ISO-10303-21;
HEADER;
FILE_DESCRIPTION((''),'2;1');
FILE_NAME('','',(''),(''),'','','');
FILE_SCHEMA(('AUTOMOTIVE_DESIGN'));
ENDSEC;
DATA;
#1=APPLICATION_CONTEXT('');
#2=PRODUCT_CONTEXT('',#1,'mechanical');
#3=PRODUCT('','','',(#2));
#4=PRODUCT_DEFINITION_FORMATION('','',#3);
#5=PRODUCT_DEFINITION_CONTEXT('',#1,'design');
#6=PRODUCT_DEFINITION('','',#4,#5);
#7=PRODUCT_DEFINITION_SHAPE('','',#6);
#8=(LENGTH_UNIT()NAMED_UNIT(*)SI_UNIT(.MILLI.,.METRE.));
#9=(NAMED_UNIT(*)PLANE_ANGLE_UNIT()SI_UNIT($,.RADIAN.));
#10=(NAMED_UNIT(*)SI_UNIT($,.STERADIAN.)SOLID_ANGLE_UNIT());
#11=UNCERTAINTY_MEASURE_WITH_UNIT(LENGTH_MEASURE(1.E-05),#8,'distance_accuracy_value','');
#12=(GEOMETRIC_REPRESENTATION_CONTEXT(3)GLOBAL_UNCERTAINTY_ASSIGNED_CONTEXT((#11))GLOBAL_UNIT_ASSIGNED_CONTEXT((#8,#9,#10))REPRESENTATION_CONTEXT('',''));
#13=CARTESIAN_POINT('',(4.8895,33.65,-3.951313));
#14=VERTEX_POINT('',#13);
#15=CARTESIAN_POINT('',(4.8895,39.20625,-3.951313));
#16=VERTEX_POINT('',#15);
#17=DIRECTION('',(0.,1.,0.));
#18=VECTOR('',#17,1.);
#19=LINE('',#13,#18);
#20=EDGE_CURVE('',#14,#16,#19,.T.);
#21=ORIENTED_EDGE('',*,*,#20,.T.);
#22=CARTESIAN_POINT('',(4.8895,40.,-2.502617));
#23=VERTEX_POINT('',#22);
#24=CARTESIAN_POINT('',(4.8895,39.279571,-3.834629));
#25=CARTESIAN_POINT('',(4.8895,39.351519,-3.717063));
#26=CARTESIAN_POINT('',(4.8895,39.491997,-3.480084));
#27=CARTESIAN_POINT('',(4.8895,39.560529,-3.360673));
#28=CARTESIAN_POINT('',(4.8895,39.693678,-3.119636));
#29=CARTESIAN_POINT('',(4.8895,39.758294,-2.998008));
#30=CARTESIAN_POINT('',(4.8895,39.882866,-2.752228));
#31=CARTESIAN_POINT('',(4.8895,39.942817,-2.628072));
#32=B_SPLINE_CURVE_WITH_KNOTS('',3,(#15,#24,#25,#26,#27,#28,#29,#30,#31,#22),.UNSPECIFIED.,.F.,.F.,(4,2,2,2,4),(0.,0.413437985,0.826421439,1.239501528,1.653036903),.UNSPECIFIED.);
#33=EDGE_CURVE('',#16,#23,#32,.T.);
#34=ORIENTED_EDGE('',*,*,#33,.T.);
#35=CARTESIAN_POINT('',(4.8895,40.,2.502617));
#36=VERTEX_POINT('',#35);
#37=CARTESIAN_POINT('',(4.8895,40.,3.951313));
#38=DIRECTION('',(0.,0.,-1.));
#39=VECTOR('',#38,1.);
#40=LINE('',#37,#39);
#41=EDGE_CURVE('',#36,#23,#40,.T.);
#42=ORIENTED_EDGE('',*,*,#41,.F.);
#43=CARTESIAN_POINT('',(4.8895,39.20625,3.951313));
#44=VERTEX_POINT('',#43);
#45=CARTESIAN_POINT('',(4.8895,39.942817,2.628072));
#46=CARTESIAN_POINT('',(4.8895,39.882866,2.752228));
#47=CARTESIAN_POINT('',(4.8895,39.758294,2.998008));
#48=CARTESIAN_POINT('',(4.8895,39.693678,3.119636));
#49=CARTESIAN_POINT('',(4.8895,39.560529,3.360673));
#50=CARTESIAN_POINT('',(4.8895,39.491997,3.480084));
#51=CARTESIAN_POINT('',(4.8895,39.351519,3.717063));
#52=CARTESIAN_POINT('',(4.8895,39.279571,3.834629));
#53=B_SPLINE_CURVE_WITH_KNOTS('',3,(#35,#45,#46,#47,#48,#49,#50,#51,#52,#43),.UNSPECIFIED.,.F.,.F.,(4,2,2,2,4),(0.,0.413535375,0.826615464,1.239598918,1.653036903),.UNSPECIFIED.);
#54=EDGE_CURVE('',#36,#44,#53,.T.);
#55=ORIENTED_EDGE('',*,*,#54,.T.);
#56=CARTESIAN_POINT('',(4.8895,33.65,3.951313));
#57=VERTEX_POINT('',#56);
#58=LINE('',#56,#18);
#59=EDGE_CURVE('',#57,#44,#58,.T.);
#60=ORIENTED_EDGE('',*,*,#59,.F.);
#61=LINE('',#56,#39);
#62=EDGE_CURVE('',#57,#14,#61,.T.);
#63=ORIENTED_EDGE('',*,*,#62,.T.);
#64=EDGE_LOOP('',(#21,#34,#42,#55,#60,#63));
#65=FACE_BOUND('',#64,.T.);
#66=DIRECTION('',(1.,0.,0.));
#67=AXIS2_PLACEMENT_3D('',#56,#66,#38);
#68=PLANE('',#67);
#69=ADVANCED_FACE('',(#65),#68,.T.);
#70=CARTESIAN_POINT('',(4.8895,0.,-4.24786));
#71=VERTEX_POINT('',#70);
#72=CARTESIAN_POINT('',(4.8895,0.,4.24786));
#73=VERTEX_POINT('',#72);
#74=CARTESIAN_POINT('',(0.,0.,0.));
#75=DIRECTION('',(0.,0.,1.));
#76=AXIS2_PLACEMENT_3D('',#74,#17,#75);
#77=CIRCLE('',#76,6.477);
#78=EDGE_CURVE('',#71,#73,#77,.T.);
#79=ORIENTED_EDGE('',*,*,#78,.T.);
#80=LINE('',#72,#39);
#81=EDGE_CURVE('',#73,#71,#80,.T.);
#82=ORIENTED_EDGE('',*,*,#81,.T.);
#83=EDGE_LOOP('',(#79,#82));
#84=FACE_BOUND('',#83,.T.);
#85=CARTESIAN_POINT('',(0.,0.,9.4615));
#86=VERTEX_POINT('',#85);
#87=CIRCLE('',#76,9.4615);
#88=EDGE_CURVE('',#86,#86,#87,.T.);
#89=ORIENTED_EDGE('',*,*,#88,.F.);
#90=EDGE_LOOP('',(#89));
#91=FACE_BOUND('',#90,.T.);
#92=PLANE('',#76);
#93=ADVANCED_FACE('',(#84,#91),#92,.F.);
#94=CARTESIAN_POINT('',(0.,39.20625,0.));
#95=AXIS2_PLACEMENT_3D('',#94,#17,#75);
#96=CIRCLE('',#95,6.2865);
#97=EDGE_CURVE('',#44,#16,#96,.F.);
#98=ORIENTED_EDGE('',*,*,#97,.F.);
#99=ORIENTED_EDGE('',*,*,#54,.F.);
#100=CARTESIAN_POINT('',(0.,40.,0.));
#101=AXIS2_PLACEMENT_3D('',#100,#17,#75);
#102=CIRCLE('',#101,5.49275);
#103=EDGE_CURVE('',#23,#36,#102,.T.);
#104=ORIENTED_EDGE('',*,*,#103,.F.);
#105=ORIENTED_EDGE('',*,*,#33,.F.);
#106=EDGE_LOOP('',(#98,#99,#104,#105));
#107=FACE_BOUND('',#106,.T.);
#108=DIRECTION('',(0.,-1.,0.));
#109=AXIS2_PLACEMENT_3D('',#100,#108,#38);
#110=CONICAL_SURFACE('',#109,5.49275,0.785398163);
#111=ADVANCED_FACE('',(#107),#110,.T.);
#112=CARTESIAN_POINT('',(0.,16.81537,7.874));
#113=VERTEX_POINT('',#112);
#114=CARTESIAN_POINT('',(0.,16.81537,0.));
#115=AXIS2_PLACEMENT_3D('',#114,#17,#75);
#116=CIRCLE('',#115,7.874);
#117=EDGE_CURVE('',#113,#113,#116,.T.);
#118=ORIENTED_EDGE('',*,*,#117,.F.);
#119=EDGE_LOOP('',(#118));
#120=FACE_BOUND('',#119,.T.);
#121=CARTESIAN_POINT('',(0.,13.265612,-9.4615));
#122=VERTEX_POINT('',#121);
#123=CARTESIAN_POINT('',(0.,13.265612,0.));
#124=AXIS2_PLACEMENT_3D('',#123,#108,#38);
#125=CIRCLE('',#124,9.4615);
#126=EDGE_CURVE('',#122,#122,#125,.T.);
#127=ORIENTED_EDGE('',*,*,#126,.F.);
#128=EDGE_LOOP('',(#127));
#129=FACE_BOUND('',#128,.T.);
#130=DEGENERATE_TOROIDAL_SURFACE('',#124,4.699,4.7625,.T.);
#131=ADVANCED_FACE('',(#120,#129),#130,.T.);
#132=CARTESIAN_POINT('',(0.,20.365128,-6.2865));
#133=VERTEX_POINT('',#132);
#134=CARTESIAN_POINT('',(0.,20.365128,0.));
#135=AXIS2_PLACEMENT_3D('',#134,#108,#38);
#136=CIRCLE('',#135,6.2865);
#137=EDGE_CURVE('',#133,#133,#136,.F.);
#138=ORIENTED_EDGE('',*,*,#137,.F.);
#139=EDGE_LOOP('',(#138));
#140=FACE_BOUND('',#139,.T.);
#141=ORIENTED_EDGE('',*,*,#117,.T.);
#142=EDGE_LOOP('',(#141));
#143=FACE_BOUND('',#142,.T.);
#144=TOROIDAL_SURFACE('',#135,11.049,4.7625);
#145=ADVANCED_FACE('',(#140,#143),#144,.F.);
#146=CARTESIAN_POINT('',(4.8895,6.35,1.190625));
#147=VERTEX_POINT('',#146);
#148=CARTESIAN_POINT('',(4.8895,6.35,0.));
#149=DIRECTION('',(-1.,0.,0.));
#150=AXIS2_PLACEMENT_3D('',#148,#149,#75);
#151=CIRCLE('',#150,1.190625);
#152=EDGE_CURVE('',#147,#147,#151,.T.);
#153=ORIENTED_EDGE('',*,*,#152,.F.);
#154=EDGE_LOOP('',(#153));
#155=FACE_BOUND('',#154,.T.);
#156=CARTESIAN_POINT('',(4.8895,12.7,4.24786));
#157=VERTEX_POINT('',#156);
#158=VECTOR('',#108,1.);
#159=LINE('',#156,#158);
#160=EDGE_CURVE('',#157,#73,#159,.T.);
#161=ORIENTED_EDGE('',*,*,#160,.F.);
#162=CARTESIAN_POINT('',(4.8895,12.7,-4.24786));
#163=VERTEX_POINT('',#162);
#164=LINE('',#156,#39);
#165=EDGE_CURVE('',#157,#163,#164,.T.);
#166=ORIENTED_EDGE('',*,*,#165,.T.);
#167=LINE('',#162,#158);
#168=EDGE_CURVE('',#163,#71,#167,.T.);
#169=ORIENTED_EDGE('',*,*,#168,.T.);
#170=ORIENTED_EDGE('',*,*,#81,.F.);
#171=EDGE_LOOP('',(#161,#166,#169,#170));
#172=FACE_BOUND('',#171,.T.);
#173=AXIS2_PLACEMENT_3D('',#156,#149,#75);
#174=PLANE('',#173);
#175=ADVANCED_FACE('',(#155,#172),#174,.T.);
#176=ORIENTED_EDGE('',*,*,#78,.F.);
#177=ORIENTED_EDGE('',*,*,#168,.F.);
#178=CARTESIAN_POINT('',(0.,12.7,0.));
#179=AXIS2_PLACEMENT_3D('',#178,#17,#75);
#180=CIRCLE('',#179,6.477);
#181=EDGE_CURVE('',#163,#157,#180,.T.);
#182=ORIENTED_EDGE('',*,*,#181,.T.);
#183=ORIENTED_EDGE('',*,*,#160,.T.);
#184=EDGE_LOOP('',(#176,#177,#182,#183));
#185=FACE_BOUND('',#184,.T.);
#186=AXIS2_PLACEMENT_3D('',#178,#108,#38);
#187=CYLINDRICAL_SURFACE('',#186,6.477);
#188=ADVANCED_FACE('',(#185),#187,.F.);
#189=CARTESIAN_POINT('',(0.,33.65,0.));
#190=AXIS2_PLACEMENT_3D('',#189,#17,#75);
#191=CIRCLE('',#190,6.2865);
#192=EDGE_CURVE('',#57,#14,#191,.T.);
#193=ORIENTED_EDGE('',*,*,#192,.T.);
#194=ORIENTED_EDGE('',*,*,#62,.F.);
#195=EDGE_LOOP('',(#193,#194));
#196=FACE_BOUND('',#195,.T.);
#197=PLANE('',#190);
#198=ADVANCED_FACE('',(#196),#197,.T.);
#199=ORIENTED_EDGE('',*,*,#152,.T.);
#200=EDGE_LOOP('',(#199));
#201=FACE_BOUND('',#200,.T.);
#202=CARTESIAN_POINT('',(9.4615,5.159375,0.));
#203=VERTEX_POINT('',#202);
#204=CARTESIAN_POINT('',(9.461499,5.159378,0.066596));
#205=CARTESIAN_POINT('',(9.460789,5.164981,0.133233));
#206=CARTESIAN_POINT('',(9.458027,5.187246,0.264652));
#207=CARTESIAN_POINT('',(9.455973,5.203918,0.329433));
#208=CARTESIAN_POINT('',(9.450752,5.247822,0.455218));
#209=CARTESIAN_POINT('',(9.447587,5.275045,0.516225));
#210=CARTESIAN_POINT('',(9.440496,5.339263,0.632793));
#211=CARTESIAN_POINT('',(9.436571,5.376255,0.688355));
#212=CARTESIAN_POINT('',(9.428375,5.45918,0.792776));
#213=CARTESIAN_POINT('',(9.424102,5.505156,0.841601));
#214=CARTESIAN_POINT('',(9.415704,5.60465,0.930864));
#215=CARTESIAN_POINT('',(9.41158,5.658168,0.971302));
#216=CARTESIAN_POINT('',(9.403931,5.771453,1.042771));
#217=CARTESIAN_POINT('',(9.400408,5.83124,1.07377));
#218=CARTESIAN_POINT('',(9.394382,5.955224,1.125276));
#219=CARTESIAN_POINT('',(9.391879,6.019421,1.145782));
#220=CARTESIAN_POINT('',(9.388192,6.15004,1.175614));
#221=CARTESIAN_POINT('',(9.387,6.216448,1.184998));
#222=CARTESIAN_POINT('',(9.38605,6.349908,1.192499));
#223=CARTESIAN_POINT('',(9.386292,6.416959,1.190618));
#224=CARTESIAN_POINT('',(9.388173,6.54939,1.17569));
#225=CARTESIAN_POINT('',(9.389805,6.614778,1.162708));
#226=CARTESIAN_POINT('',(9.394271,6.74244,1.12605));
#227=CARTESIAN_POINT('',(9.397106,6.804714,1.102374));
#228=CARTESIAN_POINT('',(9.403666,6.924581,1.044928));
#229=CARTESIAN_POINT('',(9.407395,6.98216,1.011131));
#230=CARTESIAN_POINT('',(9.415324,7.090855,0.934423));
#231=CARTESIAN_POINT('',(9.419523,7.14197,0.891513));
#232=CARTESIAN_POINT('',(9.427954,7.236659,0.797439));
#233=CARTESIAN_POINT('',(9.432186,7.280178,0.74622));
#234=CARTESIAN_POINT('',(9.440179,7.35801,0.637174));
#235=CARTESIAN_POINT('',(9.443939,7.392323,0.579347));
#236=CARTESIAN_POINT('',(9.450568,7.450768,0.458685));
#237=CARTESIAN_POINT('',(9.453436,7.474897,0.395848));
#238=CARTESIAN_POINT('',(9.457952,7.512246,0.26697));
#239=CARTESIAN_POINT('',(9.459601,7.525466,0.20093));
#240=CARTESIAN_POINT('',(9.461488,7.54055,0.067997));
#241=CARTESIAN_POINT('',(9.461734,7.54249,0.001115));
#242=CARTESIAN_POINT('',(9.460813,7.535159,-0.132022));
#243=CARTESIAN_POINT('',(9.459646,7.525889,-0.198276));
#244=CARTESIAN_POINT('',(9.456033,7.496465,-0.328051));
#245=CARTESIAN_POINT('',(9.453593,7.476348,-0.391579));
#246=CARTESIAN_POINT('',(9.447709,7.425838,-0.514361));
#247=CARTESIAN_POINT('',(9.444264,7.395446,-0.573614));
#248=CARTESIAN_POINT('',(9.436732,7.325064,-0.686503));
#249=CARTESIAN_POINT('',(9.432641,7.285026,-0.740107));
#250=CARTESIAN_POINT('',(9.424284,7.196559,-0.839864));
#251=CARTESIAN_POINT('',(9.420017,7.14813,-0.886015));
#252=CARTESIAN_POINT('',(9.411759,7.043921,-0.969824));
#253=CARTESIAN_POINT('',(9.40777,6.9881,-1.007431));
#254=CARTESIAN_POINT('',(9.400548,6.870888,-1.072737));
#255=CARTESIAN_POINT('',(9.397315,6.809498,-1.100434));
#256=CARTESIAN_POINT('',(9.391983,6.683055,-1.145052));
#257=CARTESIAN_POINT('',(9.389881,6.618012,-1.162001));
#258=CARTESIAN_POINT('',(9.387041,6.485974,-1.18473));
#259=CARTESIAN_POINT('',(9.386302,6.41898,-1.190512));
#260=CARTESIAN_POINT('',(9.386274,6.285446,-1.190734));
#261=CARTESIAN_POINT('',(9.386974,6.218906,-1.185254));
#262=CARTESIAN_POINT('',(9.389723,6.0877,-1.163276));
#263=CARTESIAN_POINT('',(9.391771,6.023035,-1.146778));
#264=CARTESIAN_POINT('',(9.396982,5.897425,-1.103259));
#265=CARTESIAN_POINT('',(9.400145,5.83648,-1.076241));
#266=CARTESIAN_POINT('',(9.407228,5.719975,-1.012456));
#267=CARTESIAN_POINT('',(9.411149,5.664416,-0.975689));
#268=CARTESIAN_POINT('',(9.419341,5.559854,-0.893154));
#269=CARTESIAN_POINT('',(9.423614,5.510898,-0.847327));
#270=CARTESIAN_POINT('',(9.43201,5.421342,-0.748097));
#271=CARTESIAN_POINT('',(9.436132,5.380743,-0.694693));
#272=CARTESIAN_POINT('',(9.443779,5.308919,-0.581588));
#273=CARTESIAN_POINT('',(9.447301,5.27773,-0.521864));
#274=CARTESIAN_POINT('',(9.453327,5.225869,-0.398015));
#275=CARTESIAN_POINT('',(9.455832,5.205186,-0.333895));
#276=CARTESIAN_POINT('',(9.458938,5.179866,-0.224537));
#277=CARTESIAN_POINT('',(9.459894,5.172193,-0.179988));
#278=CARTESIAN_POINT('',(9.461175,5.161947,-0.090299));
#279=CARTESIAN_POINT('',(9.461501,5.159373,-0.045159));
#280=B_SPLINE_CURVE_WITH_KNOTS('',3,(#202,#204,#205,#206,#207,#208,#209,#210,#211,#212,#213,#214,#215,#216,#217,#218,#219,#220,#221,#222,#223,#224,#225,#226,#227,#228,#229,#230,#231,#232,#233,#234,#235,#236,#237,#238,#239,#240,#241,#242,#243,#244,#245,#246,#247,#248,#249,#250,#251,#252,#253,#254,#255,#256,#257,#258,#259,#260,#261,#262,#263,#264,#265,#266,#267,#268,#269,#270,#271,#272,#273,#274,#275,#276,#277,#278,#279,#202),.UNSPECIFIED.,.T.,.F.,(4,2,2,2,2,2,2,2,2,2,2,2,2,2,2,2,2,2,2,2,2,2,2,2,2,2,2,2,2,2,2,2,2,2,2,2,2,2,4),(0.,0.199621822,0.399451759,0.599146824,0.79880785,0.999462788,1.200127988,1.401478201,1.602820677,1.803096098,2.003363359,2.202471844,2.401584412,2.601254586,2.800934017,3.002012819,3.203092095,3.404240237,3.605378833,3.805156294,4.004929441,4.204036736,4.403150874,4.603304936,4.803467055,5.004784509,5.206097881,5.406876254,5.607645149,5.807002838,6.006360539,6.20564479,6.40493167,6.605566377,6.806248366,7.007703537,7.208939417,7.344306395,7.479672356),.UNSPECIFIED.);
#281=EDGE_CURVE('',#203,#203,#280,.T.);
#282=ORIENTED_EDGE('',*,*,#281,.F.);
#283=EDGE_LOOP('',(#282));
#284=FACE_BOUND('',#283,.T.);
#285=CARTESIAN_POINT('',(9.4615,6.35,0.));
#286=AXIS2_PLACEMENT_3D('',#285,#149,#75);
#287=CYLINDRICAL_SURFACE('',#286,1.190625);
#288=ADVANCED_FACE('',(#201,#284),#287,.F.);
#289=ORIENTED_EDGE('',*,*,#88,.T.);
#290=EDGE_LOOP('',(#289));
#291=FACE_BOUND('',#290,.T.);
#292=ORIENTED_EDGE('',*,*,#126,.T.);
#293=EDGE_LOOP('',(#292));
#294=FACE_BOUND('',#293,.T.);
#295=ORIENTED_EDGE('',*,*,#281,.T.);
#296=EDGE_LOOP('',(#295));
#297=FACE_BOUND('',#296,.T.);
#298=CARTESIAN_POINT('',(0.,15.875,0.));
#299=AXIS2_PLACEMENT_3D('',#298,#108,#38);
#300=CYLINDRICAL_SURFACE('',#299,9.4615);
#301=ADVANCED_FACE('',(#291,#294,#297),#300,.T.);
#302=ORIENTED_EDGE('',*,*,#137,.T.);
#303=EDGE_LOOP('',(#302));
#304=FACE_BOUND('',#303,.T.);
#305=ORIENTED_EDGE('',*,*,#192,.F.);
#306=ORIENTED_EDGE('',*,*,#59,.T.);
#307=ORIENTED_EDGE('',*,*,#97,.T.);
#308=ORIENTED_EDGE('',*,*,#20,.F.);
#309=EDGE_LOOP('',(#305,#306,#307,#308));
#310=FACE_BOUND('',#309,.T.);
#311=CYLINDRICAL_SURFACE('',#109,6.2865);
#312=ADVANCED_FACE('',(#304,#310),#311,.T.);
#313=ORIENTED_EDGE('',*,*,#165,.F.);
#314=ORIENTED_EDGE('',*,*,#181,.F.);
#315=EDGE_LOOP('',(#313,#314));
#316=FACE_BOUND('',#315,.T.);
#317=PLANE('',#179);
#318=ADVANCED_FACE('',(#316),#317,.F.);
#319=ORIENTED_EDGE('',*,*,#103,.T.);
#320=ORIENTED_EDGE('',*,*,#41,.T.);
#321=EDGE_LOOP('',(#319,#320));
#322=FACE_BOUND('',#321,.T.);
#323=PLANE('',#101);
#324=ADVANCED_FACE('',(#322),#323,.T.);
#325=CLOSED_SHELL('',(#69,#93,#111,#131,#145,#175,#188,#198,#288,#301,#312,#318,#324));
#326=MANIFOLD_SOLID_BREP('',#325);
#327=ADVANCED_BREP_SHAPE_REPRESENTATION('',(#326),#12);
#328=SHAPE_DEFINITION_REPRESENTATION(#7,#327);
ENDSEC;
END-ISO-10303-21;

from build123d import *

# Parameters (mm, degrees)
SKETCH1_R           = 6.2865
BASE_EXTRUDE_DEPTH  = 40
SKETCH3_R           = 9.4615
BOSS_EXTRUDE1_DEPTH = 15.875
CUT_EXTRUDE1_DEPTH  = 12.7
FILLET1_R           = 4.7625
FILLET2_R           = 4.7625
SKETCH5_R           = 1.190625
CUT_EXTRUDE2_DEPTH  = 44.537009406
CUT_EXTRUDE3_START  = -6.35
CUT_EXTRUDE3_DEPTH  = 6.35
CHAMFER1_SIZE       = 0.79375


with BuildPart() as part:
    # Sketch1 → Base-Extrude (new body)
    with BuildSketch(Plane(origin=(0, 0, 0), x_dir=(-1, 0, 0), z_dir=(0, 1, 0))):
        with Locations(Location((0, 0, 0), (0, 0, 90))):
            Circle(SKETCH1_R)
    extrude(amount=BASE_EXTRUDE_DEPTH)

    # Sketch3 → Boss-Extrude1 (add)
    with BuildSketch(Plane(origin=(0, 0, 0), x_dir=(-1, 0, 0), z_dir=(0, 1, 0))):
        with Locations(Location((0, 0, 0), (0, 0, 90))):
            Circle(SKETCH3_R)
    extrude(amount=BOSS_EXTRUDE1_DEPTH)

    # Sketch4 → Cut-Extrude1 (cut)
    with BuildSketch(Plane(origin=(0, 0, 0), x_dir=(-1, 0, 0), z_dir=(0, 1, 0))):
        with BuildLine():
            Line((-4.8895, 4.247860491), (-4.8895, -4.247860491))
            ThreePointArc((-4.8895, -4.247860491), (6.477, 0), (-4.8895, 4.247860491))
        make_face()
    extrude(amount=CUT_EXTRUDE1_DEPTH, mode=Mode.SUBTRACT)

    # Fillet1
    # the kernel refuses this fillet: 4.7625 mm, written as the material it adds along each edge
    with BuildSketch(Plane(origin=(0, 15.875, 0), x_dir=(0, 0, 1), z_dir=(1, 0, 0))) as fillet1_piece_1:
        with BuildLine():
            CenterArc((11.049, -4.490128061), FILLET1_R, 109.471220634, 70.528779366)
            Line((6.2865, -4.490128061), (6.19125, -4.490128061))
            Line((6.19125, -4.490128061), (6.19125, 0))
            Line((6.19125, 0), (6.2865, 0.09525))
            ThreePointArc((6.2865, 0.09525), (7.874, 0.09525), (9.42975, 0.089802561))
            Line((9.42975, 0.089802561), (9.4615, 0))
        make_face()
    revolve(axis=Axis((0, 15.875, 0), (0, -1, 0)))

    # Fillet2
    fillet2_edges = [part.edges().sort_by_distance(p)[0] for p in [
        (0, 15.875, -9.4615),
    ]]
    fillet(fillet2_edges, radius=FILLET2_R)

    # Sketch5 → Cut-Extrude2 (cut, through all)
    with BuildSketch(Plane.ZY.offset(-4.8895)):
        with Locations((0, 6.35)):
            Circle(SKETCH5_R)
    extrude(amount=-CUT_EXTRUDE2_DEPTH, mode=Mode.SUBTRACT)

    # Sketch7 → Cut-Extrude3 (cut)
    with BuildSketch(Plane(origin=(0, 40, 0), x_dir=(-1, 0, 0), z_dir=(0, 1, 0)).offset(CUT_EXTRUDE3_START)):
        with BuildLine():
            Line((-4.8895, 3.951312693), (-4.8895, -3.951312693))
            ThreePointArc((-4.8895, -3.951312693), (-6.2865, 0), (-4.8895, 3.951312693))
        make_face()
    extrude(amount=CUT_EXTRUDE3_DEPTH, mode=Mode.SUBTRACT)

    # Chamfer1
    chamfer1_edges = [part.edges().sort_by_distance(p)[0] for p in [
        (-5.67274226, 40, -2.70925774),
    ]]
    chamfer(chamfer1_edges, length=CHAMFER1_SIZE)


solid = part.part
